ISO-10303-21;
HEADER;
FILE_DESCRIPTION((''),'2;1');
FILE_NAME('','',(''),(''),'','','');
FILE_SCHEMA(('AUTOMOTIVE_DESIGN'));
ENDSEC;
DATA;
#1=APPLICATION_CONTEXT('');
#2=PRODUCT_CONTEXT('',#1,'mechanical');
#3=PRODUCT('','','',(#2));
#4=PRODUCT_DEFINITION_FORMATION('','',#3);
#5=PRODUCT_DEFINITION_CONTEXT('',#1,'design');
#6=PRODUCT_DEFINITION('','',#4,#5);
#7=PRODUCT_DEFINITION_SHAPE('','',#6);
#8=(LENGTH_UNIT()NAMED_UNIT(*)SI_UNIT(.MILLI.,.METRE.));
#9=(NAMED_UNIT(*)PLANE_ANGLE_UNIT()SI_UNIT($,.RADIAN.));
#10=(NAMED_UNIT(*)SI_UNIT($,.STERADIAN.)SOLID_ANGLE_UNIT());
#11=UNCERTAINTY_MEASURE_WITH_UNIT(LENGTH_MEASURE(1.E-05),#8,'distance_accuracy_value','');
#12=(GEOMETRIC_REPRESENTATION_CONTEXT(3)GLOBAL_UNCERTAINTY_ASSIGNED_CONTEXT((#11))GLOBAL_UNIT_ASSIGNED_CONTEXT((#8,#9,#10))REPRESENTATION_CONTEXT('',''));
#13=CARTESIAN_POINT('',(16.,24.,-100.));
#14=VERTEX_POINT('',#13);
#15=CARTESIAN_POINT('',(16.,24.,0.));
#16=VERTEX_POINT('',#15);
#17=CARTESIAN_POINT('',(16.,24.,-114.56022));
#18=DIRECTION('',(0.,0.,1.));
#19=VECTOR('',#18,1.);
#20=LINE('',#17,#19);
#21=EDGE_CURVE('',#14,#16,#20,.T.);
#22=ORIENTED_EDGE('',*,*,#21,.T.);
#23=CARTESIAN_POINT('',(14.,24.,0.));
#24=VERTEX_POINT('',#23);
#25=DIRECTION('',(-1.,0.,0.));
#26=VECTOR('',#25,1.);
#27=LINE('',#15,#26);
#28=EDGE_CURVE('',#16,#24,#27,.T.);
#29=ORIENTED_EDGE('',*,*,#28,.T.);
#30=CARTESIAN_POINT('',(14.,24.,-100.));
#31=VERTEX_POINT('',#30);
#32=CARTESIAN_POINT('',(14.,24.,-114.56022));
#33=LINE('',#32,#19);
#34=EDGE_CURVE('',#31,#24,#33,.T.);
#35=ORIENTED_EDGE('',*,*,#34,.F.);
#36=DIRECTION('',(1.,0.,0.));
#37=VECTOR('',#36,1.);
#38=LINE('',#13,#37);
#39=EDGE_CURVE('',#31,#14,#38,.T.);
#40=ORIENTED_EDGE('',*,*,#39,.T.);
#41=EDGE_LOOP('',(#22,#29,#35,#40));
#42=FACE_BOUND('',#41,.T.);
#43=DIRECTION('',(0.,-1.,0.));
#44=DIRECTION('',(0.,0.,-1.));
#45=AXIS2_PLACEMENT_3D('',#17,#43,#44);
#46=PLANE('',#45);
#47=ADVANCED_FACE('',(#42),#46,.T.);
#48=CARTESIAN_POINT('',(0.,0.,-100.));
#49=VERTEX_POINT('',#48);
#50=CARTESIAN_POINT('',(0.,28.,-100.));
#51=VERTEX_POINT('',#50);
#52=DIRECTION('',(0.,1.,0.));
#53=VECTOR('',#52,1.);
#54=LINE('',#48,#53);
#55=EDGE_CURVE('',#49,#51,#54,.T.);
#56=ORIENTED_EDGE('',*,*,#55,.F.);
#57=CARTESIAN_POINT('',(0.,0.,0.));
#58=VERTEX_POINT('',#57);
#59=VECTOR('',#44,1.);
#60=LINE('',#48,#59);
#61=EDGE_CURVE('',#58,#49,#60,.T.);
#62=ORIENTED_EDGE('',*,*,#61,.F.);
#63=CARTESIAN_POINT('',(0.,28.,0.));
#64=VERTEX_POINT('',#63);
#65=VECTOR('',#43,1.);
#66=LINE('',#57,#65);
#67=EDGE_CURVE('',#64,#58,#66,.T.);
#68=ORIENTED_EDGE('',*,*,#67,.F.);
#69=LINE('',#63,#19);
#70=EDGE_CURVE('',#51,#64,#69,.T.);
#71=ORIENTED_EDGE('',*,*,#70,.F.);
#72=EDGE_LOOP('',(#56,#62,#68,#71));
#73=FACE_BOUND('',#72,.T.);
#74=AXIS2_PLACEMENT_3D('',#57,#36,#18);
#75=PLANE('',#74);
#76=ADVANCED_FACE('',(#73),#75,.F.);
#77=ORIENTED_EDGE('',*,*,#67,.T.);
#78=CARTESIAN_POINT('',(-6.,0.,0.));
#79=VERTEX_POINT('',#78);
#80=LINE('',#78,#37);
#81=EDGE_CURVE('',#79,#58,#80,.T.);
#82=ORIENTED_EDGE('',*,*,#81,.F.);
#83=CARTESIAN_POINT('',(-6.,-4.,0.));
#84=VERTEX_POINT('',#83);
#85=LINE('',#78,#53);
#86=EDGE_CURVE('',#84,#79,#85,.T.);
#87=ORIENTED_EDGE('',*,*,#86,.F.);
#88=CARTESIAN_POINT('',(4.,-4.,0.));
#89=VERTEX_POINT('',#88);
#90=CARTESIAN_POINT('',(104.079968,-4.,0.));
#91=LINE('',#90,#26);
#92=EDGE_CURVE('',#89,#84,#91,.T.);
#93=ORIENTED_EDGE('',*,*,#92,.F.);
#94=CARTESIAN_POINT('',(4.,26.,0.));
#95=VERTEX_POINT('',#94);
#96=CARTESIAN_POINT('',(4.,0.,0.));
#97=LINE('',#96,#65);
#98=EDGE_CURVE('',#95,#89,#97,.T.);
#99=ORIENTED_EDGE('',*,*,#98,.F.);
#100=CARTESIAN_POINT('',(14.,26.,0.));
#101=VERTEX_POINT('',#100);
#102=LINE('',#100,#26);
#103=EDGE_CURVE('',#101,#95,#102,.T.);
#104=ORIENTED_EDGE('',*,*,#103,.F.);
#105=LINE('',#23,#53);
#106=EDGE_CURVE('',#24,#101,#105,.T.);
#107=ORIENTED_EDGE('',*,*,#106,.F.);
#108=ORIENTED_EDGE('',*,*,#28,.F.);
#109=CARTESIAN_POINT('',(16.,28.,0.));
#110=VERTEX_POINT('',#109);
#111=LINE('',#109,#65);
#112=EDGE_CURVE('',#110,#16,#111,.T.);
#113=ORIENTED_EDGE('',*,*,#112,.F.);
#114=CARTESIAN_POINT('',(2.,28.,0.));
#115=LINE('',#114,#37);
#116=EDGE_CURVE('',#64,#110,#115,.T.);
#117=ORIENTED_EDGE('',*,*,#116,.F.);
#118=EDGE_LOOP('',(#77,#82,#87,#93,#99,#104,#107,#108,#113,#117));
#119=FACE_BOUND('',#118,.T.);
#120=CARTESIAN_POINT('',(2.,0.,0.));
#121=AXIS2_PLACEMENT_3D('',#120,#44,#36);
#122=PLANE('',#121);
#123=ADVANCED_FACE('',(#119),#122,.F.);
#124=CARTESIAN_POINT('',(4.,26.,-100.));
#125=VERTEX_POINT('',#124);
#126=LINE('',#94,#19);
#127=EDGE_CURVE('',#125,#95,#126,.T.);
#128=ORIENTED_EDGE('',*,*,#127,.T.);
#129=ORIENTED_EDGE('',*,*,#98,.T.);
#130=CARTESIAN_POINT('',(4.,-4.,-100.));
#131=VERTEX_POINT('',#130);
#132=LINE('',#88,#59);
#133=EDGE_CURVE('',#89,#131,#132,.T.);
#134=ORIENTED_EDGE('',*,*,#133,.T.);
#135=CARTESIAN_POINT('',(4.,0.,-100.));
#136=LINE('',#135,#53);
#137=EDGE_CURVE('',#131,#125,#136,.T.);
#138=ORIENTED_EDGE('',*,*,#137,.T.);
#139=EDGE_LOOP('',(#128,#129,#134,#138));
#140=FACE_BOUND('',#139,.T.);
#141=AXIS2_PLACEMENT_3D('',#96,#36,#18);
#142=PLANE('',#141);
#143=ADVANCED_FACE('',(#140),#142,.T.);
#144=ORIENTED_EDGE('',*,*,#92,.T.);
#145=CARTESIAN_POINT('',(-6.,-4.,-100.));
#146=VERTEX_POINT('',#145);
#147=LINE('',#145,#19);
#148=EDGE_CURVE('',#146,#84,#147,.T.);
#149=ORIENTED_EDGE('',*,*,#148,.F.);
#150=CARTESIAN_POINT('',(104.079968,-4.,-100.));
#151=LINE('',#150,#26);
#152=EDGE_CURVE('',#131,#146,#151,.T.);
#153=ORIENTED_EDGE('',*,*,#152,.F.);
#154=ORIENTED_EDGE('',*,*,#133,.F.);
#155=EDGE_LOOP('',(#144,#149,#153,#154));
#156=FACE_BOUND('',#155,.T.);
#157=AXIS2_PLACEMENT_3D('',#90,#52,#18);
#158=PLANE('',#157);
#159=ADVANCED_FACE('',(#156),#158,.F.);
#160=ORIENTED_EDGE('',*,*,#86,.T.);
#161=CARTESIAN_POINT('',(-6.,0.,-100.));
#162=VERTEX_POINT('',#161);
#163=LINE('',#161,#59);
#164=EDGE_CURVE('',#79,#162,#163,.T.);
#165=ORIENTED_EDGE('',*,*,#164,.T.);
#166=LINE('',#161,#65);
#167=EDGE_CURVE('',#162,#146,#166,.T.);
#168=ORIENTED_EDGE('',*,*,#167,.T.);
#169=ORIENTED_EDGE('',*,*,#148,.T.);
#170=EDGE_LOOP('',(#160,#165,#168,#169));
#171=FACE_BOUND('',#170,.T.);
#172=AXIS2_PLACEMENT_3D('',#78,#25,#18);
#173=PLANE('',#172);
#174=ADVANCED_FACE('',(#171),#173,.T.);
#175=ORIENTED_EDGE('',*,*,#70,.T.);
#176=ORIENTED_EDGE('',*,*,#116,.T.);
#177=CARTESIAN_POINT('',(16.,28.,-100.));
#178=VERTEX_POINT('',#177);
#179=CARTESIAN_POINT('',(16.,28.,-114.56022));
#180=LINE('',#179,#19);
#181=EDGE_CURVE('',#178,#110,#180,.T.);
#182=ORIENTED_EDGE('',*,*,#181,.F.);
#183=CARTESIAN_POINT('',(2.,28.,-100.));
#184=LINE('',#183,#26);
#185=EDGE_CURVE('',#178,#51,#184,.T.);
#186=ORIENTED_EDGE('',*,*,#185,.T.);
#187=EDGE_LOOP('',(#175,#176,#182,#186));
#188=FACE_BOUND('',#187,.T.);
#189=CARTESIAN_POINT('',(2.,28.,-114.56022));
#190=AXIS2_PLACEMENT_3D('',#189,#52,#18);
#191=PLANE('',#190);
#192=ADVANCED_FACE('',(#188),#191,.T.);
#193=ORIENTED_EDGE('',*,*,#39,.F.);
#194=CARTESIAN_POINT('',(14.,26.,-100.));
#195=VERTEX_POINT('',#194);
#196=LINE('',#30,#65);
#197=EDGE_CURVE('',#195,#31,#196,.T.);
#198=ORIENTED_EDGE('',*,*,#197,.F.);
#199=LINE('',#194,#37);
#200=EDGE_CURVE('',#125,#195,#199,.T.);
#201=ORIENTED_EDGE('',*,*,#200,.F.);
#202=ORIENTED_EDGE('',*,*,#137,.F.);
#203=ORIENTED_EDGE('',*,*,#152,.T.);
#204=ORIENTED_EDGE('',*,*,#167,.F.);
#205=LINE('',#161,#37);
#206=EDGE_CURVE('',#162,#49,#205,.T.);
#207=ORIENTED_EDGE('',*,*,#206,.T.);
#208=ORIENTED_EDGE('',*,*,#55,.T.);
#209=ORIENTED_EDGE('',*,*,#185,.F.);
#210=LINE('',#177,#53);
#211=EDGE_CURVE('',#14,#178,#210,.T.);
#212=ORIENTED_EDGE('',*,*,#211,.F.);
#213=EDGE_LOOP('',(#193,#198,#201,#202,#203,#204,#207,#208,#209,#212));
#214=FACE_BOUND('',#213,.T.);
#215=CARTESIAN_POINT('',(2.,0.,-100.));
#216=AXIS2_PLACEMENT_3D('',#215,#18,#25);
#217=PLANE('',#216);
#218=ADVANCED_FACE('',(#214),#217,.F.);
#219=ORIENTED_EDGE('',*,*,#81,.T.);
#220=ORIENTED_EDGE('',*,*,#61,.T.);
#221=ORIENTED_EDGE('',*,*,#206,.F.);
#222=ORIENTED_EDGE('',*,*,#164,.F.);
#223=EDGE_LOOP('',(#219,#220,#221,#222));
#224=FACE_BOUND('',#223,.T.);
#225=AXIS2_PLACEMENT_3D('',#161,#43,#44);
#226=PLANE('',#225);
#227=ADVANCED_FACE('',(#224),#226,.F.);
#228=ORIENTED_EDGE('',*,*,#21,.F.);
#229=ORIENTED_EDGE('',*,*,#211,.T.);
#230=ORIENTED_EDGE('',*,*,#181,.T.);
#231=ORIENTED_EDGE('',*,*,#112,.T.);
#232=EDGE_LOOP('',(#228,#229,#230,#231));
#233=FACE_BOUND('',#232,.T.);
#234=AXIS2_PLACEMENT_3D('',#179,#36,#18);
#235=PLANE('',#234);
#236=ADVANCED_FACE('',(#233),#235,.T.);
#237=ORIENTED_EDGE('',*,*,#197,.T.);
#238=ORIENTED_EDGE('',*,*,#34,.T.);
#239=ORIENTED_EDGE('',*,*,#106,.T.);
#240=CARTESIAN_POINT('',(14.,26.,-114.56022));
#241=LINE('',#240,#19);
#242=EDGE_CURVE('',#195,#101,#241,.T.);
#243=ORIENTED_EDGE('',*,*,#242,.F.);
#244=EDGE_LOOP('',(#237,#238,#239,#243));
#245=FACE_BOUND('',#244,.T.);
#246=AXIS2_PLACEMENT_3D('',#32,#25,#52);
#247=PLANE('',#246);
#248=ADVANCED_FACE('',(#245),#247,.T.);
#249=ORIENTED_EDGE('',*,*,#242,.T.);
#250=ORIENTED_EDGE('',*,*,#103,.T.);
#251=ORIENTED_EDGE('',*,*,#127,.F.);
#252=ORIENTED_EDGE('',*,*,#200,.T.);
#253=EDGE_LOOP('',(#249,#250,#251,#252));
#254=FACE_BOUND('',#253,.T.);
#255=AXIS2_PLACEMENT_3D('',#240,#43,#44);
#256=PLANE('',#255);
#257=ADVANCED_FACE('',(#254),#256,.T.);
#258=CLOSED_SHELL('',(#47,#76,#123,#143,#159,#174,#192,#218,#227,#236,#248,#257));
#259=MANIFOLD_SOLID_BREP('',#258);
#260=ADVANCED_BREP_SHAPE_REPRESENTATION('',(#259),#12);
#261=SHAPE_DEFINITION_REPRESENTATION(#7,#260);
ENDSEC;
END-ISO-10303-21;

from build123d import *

# Parameters (mm, degrees)
SKETCH1_W            = 100
SKETCH1_H            = 26
BOSS_EXTRUDE1_DEPTH  = 2
BOSS_EXTRUDE2_DEPTH  = 100
MOVE_START           = -100
MOVE_FACE1_OUTLINE_W = 2
MOVE_FACE1_OUTLINE_H = 28
MOVE_FACE1_DEPTH     = 100
SKETCH5_W            = 100
SKETCH5_H            = 4
BOSS_EXTRUDE3_DEPTH  = 6
SKETCH6_W            = 100
SKETCH6_H            = 4
BOSS_EXTRUDE4_DEPTH  = 4


# Read off the part's stored shape, not the designer's step: Move Face1
with BuildPart() as part:
    # Sketch1 → Boss-Extrude1 (new body)
    with BuildSketch(Plane(origin=(0, 0, 0), x_dir=(0, 0, -1), z_dir=(1, 0, 0))):
        with Locations((50, 13)):
            Rectangle(SKETCH1_W, SKETCH1_H)
    extrude(amount=BOSS_EXTRUDE1_DEPTH)

    # Sketch2 → Boss-Extrude2 (add)
    with BuildSketch(Plane.XY):
        Polygon((2, 26), (2, 28), (-12, 28), (-12, 24), (-10, 24), (-10, 26), align=None)
    extrude(amount=-BOSS_EXTRUDE2_DEPTH)


with BuildPart() as body_2:
    # Mirror1: mirrored copy
    add(part.part.mirror(Plane.ZY.offset(-2)))

    # Move Face1 outline → Move Face1 (add)
    with BuildSketch(Plane.XY.offset(MOVE_START)):
        with Locations((1, 14)):
            Rectangle(MOVE_FACE1_OUTLINE_W, MOVE_FACE1_OUTLINE_H)
    extrude(amount=MOVE_FACE1_DEPTH)



with BuildPart() as body_2_2:
    # Sketch5 → Boss-Extrude3 (new body)
    with BuildSketch(Plane.ZY):
        with Locations((-50, -2)):
            Rectangle(SKETCH5_W, SKETCH5_H)
    extrude(amount=BOSS_EXTRUDE3_DEPTH)


with BuildPart() as body_2_1:
    add(body_2.part)

    add(body_2_2.part)  # Boss-Extrude4 merges body 2 2
    # Sketch6 → Boss-Extrude4 (add)
    with BuildSketch(Plane(origin=(0, 0, 0), x_dir=(0, 0, -1), z_dir=(1, 0, 0))):
        with Locations((50, -2)):
            Rectangle(SKETCH6_W, SKETCH6_H)
    extrude(amount=BOSS_EXTRUDE4_DEPTH)


solid = body_2_1.part
